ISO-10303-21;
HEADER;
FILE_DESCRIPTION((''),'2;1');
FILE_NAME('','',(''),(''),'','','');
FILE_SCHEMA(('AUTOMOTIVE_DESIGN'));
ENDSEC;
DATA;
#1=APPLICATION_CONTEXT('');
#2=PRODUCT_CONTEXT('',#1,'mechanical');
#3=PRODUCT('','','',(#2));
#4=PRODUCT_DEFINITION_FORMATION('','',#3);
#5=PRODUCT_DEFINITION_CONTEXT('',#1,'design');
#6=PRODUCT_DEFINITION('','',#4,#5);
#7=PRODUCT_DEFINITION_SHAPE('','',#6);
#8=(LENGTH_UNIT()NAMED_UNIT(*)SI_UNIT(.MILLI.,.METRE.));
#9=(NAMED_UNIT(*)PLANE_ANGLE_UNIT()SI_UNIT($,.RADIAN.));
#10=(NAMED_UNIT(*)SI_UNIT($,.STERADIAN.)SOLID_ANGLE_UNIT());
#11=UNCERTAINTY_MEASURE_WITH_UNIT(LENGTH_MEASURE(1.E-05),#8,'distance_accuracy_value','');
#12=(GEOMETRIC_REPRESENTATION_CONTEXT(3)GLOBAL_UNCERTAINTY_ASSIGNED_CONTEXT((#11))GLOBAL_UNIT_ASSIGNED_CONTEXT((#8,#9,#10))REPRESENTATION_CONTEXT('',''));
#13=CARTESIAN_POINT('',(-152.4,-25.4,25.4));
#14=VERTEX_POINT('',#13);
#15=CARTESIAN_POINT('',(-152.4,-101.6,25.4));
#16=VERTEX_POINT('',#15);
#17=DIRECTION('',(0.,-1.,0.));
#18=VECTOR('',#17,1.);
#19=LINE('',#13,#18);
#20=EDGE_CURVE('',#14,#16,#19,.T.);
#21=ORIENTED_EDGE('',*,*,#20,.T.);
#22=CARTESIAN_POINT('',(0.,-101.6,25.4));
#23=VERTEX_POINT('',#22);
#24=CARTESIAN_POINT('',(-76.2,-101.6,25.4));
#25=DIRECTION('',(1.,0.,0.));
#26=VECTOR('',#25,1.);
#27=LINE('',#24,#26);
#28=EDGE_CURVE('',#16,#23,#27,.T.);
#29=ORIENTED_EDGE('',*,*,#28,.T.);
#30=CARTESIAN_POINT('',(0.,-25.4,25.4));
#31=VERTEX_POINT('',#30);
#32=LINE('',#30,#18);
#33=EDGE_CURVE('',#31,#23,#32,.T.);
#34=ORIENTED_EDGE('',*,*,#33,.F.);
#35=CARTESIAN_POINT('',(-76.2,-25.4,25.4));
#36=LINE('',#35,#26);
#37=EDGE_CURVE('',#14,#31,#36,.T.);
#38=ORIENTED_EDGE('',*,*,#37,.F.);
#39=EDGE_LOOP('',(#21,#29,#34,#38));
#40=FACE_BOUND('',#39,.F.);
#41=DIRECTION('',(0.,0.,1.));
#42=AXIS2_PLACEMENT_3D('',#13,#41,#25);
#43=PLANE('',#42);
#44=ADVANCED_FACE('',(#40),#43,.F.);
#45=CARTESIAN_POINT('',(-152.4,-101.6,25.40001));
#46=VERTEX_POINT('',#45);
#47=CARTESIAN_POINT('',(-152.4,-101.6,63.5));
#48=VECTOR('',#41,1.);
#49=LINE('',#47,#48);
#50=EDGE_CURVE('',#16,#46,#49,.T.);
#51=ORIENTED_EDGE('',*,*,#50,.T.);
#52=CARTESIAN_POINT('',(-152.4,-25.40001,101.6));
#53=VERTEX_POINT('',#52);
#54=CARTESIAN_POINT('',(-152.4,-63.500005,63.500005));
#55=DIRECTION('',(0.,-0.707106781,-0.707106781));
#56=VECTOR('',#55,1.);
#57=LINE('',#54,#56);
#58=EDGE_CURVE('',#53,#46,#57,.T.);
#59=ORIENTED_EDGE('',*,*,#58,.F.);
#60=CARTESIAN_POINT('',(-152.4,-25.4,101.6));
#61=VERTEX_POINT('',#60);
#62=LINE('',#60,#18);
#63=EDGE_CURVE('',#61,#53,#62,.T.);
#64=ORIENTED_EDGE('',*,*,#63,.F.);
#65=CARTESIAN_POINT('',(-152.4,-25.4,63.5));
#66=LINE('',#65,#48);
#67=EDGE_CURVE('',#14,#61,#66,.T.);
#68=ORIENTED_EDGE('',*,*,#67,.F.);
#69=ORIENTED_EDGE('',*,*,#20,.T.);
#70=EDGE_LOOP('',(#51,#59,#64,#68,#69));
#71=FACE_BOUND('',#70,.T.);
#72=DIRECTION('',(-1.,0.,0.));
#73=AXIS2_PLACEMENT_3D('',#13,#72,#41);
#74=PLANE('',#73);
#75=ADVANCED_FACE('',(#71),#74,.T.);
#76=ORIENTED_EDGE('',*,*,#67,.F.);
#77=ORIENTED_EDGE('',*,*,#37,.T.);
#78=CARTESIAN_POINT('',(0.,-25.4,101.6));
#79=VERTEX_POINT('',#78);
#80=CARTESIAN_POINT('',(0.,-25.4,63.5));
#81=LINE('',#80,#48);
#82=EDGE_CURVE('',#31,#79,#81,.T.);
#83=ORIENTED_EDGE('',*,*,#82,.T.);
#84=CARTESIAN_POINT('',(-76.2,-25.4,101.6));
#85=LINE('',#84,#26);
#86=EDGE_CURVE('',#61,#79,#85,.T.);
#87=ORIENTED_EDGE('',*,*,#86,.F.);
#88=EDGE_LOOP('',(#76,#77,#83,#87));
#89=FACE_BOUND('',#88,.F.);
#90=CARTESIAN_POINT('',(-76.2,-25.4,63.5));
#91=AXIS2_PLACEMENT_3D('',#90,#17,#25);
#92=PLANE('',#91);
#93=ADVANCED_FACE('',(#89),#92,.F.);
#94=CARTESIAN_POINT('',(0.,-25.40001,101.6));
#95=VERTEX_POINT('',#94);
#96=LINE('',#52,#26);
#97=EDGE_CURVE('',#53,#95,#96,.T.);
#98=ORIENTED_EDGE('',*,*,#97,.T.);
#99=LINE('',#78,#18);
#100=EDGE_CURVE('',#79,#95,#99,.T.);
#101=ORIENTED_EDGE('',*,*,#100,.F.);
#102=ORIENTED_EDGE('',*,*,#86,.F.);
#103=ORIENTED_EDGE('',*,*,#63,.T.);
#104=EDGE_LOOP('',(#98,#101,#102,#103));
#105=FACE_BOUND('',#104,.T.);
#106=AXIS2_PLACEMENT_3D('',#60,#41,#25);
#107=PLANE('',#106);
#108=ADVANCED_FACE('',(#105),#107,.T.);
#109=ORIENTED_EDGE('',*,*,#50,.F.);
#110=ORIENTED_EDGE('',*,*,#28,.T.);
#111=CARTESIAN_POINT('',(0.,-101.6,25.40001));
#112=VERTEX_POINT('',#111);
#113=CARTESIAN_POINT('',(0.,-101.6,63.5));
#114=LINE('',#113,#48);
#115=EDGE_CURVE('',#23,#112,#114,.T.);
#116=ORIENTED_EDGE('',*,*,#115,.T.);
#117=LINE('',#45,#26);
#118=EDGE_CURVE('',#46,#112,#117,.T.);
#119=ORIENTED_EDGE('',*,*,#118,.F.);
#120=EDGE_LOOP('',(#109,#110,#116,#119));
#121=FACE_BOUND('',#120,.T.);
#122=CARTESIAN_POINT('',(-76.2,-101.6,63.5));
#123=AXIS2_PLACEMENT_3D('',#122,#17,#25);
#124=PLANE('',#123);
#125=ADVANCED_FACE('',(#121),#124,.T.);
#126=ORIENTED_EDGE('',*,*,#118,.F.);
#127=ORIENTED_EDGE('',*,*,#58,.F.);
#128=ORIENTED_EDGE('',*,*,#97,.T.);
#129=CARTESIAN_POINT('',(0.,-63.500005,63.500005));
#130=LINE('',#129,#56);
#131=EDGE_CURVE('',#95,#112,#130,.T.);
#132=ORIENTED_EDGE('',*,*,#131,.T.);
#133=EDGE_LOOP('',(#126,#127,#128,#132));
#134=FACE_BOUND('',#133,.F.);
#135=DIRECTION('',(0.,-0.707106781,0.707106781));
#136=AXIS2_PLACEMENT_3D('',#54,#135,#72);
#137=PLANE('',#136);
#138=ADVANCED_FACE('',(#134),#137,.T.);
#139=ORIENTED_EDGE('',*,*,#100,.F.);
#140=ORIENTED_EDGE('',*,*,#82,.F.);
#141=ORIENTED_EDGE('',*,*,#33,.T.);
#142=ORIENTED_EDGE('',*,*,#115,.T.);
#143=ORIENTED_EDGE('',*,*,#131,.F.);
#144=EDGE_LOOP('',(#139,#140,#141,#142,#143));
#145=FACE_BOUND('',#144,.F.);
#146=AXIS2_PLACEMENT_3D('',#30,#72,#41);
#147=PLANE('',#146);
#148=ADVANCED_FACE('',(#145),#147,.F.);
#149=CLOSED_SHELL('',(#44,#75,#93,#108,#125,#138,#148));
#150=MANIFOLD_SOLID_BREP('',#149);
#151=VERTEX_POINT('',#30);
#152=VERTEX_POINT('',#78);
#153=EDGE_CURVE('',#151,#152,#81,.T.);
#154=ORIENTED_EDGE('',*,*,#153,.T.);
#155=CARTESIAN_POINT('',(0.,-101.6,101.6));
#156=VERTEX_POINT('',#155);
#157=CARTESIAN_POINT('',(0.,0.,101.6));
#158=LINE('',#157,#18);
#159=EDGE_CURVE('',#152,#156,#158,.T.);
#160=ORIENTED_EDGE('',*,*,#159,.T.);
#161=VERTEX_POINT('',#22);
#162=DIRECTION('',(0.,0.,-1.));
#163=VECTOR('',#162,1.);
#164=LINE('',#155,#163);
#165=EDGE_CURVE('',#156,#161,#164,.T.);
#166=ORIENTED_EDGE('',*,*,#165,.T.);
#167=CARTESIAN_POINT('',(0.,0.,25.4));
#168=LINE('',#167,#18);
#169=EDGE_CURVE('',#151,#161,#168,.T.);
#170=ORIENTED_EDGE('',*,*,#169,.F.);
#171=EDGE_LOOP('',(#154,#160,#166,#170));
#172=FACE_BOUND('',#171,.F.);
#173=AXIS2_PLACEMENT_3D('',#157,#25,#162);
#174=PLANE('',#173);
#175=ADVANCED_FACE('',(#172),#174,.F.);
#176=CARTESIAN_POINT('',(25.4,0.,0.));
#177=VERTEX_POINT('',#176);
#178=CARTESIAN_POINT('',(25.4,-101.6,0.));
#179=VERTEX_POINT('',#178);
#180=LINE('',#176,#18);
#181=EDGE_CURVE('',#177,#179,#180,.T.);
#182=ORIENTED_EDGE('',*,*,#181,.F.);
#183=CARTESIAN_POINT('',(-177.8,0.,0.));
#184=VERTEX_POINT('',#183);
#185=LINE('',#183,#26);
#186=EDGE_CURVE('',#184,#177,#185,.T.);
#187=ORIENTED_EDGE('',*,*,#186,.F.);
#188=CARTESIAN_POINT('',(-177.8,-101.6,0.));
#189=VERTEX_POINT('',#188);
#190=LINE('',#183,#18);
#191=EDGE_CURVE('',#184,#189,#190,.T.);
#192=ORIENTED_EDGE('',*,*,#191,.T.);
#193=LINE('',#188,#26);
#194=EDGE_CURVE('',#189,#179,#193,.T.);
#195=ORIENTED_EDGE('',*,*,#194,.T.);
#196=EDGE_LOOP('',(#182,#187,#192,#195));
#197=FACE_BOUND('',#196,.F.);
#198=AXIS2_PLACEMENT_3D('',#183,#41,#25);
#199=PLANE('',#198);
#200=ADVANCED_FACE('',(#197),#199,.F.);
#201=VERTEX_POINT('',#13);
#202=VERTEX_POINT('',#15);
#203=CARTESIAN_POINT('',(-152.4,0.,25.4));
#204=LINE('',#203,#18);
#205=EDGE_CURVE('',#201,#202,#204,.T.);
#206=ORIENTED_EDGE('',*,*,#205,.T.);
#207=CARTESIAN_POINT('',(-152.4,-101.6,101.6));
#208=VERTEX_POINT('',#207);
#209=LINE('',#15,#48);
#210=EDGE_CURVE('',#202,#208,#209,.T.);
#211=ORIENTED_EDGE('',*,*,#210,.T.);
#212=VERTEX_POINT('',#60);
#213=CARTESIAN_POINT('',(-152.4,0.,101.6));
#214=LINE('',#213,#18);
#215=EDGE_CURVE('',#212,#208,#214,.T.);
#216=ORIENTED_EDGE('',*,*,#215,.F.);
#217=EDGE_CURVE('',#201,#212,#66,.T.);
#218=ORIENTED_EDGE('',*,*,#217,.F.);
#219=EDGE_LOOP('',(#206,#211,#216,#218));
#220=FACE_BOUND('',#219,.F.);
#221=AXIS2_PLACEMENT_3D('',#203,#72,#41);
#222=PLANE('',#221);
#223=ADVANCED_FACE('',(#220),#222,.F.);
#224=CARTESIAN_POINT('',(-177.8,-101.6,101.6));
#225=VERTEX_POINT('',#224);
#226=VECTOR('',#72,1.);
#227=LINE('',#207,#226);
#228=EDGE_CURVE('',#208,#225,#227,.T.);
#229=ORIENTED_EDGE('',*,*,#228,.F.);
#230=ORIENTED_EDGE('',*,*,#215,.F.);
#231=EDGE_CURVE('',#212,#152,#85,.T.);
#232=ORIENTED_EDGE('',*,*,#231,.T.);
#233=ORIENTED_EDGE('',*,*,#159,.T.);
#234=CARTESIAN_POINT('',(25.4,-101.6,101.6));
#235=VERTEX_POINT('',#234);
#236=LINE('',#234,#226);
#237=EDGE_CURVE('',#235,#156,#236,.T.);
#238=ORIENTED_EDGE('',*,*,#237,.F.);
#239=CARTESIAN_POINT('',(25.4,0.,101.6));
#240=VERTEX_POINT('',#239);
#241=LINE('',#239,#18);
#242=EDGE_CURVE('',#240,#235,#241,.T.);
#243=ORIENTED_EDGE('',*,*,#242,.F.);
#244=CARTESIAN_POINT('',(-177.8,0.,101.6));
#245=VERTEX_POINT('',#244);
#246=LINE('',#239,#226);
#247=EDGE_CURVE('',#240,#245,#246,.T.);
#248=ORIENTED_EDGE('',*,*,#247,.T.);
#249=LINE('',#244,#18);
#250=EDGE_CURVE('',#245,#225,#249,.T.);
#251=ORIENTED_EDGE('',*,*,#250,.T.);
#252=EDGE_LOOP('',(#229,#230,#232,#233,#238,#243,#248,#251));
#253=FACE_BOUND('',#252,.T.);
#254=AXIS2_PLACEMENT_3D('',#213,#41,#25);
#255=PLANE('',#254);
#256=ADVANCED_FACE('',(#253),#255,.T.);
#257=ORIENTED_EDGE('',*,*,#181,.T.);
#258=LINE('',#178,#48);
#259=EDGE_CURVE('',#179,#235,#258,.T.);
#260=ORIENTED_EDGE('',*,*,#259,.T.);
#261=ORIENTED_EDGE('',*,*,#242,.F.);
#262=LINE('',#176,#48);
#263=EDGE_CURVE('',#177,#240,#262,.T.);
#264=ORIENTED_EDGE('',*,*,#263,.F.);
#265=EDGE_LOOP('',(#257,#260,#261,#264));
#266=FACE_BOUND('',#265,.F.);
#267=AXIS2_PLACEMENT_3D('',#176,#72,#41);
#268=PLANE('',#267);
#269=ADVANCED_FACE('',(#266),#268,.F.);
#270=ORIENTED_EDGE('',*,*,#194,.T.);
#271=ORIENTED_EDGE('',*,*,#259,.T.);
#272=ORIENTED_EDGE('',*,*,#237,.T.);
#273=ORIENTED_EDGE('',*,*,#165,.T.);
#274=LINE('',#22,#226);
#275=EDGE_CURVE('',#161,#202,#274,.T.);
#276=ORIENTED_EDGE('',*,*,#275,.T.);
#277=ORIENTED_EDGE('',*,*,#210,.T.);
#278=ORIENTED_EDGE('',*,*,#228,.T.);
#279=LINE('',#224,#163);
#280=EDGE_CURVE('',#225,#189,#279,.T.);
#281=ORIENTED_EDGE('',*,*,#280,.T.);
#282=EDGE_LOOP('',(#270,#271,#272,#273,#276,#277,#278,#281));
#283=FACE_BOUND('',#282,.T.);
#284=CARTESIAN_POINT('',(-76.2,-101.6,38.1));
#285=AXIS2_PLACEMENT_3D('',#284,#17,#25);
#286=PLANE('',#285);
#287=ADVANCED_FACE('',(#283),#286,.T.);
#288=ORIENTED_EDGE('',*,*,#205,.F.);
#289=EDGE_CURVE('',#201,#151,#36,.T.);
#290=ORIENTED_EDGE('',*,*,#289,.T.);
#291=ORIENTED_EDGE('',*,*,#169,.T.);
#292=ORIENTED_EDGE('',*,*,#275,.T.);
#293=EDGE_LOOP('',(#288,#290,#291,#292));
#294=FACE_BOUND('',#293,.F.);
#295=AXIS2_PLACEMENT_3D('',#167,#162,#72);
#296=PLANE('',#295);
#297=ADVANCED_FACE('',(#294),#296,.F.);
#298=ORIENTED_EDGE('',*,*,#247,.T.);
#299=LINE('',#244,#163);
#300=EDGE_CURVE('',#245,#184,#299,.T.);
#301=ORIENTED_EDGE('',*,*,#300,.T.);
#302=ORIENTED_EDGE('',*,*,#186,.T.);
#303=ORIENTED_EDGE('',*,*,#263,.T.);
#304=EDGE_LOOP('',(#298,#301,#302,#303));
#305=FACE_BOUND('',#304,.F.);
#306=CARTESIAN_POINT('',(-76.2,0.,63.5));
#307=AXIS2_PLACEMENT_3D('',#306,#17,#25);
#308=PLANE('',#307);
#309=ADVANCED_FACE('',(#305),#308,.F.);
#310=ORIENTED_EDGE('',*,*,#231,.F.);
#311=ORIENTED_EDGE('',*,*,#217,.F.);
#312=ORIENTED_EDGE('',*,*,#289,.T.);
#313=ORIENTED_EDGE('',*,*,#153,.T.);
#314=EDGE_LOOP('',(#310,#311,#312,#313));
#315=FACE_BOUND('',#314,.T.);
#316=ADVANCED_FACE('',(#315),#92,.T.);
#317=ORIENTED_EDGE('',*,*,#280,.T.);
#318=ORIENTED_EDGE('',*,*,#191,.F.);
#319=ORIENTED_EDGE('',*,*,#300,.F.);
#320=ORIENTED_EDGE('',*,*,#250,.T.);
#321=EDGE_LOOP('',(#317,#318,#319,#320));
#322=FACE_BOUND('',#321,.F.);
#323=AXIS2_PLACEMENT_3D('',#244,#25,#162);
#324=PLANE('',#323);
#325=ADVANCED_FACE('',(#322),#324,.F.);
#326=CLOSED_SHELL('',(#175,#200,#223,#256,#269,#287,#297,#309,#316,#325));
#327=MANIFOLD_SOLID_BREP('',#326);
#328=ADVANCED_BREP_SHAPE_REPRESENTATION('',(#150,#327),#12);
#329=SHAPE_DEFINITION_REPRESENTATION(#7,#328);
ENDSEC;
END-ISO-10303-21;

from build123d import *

# Parameters (mm, degrees)
F1_DEPTH = 101.6
F0_W     = 152.4
F0_H     = 76.2
F2_DEPTH = 25.4
F3_DEPTH = 76.2
F4_SIZE  = 76.19999


# Not quite as in the source:
# - a fillet or chamfer is up to 0.001 mm smaller than in the source, because OpenCascade refuses the exact size


with BuildPart() as f1:
    # F0 (on Front) → F1 (new body)
    with BuildSketch(Plane.XZ):
        Polygon((-152.4, 0), (0, 0), (25.4, 0), (25.4, 101.6), (0, 101.6), (0, 25.4), (-152.4, 25.4), (-152.4, 101.6), (-177.8, 101.6), (-177.8, 0), align=None)
    extrude(amount=F1_DEPTH)

    # F0 (on Front) → F2 (join)
    with BuildSketch(Plane.XZ):
        with Locations((-76.2, 63.5)):
            Rectangle(F0_W, F0_H)
    extrude(amount=F2_DEPTH)


with BuildPart() as f3:
    # F3 (new): a face of the model
    f3_faces = [f1.part.faces().sort_by_distance(p)[0] for p in [
        (-76.2, -25.4, 63.5),
    ]]
    extrude(f3_faces, amount=F3_DEPTH)

    # F4 (size 76.2 in the source; OpenCascade refuses exactly that, so slightly less here)
    f4_edges = [f3.edges().sort_by_distance(p)[0] for p in [
        (-76.2, -101.6, 101.6),
    ]]
    chamfer(f4_edges, length=F4_SIZE)


solid = Compound([f1.part, f3.part])
